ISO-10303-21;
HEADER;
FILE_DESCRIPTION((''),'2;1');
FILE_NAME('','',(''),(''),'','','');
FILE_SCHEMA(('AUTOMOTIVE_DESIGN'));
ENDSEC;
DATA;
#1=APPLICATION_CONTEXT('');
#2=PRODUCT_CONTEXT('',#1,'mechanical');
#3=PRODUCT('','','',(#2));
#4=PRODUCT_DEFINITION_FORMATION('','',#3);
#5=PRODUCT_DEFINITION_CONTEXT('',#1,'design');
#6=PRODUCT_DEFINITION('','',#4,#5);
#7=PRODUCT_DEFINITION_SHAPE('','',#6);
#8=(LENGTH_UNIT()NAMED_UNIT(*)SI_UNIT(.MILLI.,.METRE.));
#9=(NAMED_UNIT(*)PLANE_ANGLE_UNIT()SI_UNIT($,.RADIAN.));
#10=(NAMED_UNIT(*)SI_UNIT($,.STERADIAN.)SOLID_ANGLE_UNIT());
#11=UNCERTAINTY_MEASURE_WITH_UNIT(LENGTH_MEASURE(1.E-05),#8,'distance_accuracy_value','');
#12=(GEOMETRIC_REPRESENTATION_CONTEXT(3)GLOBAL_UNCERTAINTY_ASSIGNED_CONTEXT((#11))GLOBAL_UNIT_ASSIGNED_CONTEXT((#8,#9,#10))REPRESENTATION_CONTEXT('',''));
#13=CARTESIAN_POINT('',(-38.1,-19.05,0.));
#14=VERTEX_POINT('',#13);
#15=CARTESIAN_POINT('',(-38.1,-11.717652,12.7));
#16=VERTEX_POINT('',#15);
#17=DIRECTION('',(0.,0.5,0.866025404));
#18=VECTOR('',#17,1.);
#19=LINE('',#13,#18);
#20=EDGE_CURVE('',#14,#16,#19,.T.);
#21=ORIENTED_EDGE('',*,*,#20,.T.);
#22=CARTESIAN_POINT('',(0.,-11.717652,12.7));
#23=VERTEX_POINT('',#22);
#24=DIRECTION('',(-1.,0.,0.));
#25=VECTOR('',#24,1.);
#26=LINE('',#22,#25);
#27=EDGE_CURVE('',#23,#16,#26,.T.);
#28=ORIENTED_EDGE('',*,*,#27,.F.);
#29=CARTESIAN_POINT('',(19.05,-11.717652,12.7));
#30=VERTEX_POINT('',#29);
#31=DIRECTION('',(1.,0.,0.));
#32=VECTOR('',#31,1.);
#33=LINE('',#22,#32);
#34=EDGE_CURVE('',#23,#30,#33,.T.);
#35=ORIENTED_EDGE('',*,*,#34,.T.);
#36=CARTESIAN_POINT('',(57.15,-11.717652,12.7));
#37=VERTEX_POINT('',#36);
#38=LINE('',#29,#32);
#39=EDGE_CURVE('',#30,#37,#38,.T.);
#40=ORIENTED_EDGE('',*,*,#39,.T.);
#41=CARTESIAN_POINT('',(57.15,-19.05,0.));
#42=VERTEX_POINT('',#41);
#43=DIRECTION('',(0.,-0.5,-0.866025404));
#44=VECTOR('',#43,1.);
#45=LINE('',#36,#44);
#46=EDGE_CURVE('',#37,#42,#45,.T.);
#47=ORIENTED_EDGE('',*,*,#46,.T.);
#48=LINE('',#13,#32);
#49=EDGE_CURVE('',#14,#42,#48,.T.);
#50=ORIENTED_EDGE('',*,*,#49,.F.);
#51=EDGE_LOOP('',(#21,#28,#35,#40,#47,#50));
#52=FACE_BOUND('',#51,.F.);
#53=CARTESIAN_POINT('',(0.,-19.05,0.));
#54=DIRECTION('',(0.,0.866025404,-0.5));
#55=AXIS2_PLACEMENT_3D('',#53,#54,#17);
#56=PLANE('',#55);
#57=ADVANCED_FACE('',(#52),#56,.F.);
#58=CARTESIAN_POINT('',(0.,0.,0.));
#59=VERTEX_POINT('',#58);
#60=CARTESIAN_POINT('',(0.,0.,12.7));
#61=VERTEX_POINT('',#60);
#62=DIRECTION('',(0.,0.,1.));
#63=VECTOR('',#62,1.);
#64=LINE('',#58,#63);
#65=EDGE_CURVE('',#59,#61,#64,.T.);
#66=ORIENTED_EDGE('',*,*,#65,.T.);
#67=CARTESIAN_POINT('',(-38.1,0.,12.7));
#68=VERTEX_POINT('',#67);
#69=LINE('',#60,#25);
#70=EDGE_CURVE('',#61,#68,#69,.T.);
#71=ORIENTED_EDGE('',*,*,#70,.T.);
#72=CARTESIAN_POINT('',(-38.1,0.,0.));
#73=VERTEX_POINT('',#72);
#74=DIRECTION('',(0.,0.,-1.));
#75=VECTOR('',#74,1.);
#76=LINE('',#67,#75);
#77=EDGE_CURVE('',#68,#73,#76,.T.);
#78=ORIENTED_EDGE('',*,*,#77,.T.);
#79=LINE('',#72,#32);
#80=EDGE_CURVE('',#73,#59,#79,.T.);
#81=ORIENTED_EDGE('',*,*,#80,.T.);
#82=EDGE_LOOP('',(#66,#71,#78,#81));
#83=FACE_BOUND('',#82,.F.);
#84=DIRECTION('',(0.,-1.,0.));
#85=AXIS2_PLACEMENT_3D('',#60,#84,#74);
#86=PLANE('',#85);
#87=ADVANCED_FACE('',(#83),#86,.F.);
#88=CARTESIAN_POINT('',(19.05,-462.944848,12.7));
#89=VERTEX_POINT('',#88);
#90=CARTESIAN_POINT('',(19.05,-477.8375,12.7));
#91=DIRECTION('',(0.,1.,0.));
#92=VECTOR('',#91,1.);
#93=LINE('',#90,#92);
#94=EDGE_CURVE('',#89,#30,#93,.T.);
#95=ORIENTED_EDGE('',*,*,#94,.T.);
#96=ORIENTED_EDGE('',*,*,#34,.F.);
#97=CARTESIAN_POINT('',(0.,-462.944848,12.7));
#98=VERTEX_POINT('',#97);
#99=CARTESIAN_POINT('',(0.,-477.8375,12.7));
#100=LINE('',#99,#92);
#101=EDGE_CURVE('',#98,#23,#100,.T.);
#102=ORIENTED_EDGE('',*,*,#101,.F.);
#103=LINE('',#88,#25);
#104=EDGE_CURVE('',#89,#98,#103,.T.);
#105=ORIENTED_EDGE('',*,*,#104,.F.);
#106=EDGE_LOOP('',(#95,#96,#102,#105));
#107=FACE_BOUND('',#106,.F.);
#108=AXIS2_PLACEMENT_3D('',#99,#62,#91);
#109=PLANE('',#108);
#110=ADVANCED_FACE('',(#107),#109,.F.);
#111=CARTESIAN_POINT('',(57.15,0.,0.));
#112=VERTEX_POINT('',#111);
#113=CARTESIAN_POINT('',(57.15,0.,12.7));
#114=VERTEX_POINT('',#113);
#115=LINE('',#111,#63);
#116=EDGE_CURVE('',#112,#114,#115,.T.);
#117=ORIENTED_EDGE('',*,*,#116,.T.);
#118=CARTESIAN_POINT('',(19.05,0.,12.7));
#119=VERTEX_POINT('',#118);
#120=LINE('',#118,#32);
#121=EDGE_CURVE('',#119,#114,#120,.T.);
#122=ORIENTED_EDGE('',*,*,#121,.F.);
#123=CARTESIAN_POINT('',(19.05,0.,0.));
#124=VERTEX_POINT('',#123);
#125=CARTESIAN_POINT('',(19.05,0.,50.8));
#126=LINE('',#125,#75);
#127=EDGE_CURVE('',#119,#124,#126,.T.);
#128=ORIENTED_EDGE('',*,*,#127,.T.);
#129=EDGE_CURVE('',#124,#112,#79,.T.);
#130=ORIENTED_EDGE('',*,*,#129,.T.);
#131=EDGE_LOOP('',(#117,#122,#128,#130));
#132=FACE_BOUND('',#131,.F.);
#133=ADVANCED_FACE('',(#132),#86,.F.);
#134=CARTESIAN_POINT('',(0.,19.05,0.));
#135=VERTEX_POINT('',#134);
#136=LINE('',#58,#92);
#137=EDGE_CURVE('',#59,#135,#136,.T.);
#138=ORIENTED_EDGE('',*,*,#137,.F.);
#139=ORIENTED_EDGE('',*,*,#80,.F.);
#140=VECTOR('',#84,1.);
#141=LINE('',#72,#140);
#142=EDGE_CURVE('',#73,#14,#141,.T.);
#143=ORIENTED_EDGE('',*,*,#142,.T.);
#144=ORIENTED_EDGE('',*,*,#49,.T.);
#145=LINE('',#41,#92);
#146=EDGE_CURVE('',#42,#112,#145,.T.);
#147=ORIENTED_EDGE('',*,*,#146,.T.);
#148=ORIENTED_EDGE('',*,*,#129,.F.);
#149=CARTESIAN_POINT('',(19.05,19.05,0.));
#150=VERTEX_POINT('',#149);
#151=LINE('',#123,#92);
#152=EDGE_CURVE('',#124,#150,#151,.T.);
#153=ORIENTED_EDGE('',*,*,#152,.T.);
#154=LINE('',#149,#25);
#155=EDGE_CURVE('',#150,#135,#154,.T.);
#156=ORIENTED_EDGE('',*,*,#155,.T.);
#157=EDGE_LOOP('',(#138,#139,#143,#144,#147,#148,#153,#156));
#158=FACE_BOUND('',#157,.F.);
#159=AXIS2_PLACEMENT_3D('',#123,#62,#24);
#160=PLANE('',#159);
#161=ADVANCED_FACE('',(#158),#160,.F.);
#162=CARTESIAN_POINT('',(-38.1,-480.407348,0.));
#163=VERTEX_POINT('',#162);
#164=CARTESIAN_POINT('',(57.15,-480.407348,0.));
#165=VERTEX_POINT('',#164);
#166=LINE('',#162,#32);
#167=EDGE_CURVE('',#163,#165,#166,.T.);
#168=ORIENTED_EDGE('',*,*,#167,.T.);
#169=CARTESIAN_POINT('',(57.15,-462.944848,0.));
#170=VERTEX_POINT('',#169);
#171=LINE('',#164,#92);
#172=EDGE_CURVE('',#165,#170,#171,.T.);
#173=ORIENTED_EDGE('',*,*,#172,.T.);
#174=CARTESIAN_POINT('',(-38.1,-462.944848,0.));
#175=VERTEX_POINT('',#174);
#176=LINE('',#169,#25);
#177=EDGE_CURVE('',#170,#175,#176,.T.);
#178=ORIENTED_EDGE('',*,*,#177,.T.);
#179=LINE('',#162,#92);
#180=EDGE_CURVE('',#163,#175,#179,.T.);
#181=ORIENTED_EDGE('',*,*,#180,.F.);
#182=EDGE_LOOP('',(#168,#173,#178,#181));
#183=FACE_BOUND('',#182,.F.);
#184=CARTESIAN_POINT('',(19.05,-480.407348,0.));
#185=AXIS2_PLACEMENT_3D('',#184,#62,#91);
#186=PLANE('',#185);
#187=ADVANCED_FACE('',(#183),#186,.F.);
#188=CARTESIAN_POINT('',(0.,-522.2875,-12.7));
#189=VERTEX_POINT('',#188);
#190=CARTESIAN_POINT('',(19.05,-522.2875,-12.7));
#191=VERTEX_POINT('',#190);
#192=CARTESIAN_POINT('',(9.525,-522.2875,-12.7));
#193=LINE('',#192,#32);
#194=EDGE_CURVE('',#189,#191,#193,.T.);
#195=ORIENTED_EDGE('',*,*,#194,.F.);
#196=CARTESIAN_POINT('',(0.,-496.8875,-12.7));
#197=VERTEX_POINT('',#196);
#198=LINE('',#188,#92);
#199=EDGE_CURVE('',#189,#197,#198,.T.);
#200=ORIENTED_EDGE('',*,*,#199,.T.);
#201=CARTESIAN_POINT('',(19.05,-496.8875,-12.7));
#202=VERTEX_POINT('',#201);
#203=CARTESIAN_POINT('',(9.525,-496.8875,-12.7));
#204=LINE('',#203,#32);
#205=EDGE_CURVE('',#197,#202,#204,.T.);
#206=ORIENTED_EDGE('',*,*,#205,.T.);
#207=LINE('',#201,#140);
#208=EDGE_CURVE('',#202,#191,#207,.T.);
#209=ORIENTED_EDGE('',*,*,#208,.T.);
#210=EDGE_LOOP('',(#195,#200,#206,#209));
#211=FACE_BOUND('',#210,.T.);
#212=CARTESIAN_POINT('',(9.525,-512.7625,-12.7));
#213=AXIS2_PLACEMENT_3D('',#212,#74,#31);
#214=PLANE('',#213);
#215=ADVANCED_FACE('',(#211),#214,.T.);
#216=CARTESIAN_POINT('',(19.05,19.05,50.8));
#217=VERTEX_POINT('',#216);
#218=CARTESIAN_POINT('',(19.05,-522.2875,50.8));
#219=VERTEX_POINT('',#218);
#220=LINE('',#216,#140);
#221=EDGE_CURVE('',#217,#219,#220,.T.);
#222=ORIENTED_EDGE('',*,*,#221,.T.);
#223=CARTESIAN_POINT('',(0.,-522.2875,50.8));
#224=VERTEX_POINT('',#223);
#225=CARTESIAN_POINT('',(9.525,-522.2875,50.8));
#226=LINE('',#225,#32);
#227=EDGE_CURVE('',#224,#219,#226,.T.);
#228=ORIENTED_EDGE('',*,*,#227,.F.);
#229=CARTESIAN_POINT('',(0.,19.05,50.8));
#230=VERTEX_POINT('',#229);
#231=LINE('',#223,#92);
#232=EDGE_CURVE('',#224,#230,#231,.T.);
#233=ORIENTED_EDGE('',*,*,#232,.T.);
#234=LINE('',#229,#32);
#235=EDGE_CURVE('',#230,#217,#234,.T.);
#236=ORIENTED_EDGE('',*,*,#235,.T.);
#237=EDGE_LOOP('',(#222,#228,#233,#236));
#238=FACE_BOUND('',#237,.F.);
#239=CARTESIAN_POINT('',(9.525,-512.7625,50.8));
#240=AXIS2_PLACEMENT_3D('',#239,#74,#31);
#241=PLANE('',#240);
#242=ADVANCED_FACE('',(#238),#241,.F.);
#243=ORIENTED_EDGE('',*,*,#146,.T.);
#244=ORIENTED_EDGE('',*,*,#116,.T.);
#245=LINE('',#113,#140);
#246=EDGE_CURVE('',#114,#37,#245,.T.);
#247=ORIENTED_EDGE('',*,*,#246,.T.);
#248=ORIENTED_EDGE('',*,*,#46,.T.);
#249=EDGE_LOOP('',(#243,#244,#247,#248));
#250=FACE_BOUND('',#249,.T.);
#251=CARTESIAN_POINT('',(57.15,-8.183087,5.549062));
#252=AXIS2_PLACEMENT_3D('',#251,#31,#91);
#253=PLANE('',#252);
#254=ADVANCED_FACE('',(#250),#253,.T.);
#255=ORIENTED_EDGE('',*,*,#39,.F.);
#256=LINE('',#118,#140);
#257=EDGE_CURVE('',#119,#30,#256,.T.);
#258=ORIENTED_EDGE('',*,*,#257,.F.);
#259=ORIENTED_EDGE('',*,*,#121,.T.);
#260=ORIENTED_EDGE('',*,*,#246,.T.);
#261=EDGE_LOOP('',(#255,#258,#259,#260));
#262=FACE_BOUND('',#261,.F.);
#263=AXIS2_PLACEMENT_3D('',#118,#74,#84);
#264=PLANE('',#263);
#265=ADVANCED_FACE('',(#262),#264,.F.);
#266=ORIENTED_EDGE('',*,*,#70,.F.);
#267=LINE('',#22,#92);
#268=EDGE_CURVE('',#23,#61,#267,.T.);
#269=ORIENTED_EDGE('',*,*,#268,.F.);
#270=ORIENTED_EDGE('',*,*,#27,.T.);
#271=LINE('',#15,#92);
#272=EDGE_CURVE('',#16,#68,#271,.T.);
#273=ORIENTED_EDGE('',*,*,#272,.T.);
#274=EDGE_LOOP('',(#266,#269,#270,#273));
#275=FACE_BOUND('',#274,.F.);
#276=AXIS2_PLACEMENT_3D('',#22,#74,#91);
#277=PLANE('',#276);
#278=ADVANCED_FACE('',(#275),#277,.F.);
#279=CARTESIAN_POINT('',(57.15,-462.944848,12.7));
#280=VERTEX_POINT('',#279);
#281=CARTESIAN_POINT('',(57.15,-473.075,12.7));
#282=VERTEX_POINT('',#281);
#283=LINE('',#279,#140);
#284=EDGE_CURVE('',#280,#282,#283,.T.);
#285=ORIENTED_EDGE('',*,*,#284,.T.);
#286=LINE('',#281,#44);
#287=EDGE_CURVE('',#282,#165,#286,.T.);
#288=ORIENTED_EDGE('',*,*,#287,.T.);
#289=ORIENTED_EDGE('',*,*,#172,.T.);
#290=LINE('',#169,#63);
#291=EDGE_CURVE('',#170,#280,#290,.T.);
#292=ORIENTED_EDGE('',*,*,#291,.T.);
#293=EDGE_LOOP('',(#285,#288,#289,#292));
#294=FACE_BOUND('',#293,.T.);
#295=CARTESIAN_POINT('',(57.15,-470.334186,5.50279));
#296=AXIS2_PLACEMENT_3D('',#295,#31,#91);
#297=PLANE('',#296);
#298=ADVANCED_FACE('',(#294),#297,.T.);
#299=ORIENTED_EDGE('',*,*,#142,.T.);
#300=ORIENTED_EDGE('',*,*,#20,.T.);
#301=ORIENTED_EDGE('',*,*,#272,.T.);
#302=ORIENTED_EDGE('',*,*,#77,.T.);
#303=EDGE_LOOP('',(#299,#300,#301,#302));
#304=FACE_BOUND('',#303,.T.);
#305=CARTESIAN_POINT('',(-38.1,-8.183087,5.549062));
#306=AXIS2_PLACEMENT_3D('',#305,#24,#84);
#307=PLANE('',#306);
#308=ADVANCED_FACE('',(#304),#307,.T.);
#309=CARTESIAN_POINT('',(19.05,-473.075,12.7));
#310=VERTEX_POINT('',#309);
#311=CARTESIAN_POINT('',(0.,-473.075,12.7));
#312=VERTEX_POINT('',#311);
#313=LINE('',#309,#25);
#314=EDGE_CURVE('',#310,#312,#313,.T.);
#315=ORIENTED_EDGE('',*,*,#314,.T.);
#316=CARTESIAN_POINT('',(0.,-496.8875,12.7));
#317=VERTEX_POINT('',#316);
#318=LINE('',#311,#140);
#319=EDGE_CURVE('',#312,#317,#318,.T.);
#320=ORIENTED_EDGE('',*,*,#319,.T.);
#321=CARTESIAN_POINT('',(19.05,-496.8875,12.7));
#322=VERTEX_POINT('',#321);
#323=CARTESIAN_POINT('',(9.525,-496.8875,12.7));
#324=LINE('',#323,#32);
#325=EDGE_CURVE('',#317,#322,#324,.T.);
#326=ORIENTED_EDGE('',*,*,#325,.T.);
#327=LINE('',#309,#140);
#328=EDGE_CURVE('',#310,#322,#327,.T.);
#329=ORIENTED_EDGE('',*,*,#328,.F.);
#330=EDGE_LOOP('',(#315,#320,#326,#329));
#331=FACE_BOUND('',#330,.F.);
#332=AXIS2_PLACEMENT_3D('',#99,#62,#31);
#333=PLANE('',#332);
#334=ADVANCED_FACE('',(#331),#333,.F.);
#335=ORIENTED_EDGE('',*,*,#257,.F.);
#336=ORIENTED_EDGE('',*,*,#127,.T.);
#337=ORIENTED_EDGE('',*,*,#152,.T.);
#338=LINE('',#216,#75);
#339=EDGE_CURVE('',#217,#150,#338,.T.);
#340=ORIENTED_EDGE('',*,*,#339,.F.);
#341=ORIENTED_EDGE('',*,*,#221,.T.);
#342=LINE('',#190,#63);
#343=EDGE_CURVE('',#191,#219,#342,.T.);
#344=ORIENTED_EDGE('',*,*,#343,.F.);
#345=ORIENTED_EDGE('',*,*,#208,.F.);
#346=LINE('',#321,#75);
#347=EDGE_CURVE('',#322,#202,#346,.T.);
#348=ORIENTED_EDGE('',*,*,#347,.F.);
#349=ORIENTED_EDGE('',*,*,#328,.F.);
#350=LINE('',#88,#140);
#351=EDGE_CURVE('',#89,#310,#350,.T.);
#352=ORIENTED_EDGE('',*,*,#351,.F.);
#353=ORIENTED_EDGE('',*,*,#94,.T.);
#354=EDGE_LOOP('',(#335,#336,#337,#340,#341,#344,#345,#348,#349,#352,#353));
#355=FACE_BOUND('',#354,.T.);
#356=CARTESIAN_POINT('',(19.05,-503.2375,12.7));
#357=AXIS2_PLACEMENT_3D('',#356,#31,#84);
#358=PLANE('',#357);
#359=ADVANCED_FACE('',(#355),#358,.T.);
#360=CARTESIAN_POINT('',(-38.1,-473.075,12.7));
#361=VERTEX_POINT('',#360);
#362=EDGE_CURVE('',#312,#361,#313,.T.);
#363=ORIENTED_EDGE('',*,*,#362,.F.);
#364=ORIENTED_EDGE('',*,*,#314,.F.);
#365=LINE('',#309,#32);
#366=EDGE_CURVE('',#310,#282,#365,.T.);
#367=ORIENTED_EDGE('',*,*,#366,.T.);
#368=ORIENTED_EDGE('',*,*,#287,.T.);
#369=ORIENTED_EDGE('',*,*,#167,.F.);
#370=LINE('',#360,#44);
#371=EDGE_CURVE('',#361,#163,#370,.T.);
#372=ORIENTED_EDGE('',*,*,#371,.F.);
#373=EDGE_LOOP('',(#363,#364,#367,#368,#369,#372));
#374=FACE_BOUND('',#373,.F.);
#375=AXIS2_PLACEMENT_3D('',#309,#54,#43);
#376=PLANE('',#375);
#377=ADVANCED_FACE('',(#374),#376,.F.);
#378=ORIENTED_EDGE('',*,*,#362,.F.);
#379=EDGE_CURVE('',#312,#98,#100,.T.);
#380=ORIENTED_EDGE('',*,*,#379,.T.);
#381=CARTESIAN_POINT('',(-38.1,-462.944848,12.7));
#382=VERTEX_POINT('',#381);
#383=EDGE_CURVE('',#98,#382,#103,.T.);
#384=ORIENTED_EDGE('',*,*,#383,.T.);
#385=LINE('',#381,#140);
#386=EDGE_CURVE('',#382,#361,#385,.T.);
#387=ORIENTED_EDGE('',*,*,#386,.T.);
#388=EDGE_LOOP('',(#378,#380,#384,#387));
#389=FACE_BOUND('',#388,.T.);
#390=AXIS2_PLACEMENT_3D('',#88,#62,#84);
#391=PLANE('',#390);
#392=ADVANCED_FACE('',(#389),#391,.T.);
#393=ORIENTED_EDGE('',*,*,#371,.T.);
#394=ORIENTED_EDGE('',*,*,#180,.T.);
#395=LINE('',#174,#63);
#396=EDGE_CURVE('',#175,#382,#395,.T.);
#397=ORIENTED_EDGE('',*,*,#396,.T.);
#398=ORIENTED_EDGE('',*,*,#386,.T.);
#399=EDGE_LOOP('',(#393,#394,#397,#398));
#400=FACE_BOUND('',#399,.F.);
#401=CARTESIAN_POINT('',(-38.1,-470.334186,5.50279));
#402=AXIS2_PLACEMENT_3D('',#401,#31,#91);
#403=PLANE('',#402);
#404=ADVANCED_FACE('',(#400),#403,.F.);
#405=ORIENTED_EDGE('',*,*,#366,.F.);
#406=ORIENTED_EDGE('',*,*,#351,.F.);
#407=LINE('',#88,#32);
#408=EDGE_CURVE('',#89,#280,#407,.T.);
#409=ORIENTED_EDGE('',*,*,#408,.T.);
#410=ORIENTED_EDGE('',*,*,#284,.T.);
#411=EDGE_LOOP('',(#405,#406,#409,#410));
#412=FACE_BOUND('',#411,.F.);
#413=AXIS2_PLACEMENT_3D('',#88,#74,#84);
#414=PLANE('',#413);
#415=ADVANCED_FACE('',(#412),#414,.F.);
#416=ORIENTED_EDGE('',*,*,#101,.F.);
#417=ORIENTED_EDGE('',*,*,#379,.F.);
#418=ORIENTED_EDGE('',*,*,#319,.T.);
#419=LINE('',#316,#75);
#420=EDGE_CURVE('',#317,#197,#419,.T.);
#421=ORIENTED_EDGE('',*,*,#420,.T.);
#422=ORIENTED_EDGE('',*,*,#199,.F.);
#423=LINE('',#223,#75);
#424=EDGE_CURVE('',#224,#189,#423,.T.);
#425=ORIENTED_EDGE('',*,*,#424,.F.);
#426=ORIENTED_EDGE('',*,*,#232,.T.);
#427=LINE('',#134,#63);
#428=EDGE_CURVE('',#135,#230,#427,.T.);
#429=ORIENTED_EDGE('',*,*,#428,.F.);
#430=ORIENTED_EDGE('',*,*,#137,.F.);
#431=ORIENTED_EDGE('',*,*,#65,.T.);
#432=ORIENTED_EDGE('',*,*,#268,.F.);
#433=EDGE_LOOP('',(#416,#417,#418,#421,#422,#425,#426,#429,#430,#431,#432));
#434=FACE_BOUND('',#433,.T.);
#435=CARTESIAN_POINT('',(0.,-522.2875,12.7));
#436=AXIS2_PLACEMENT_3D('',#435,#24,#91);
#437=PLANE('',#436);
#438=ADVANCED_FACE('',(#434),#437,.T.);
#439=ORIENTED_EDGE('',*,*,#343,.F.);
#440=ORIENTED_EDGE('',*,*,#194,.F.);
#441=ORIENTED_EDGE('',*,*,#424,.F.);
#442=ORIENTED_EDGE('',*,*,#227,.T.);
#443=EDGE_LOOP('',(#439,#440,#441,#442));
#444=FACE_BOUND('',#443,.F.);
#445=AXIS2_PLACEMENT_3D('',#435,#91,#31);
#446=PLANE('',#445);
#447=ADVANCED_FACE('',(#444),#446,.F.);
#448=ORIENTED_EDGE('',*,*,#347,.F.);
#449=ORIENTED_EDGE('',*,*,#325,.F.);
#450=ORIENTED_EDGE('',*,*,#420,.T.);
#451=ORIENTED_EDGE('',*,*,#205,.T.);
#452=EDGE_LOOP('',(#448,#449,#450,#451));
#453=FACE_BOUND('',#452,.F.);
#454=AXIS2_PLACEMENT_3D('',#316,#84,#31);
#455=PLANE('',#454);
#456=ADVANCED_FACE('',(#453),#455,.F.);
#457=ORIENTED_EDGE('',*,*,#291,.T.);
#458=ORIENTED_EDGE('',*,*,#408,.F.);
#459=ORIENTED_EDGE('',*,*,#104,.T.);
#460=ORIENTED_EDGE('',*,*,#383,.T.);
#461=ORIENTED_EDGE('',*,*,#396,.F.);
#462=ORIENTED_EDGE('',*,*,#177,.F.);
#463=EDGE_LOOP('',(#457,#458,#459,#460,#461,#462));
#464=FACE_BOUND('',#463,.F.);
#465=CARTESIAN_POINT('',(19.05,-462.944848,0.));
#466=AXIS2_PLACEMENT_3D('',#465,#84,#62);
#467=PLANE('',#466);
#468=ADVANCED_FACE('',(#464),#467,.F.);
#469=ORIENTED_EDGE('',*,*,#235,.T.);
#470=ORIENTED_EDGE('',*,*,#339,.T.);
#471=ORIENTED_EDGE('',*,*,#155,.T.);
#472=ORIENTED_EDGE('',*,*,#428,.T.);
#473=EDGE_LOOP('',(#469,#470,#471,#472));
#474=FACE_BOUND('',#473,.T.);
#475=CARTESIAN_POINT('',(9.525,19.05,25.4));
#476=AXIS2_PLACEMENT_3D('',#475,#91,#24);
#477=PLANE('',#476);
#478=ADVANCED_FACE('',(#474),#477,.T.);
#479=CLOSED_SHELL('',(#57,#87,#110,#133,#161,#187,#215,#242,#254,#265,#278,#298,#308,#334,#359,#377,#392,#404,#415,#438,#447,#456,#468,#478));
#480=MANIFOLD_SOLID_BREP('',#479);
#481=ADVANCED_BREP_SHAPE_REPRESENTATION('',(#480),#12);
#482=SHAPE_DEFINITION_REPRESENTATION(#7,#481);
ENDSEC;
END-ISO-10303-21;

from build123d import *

# Parameters (mm, degrees)
F1_DEPTH  = 19.05
F3_DEPTH  = 38.1
F5_DEPTH  = 38.1
F7_DEPTH  = 19.05
F9_DEPTH  = 57.15
F10_DEPTH = 38.1
F11_W     = 19.05
F11_H     = 38.1
F12_DEPTH = 25.4
F13_W     = 19.05
F13_H     = 19.05
F13_H_2   = 6.35
F14_DEPTH = 25.4
F15_DEPTH = 38.1


# Not quite as in the source:
# - a feature names something its author has since deleted; it is built from what else it names


with BuildPart() as f1:
    # F0 (on Right) → F1 (new body)
    with BuildSketch(Plane.YZ):
        Polygon((-19.05, 0), (0, 0), (0, 50.8), (-477.8375, 50.8), (-477.8375, 12.7), (-11.7176515813, 12.7), align=None)
    extrude(amount=F1_DEPTH)

    # F2 (on face) → F3 (join)
    with BuildSketch(Plane.YZ.offset(19.05)):
        Polygon((0, 12.7), (-11.7176515813, 12.7), (-19.05, 0), (0, 0), align=None)
    extrude(amount=F3_DEPTH)

    # F4 (on face) → F5 (join)
    with BuildSketch(Plane(origin=(0, 0, 0), x_dir=(0, -1, 0), z_dir=(-1, 0, 0))):
        Polygon((19.05, 0), (11.7176515813, 12.7), (0, 12.7), (0, 0), align=None)
    extrude(amount=F5_DEPTH)

    # F6 (on face) → F7 (join)
    with BuildSketch(Plane(origin=(0, 0, 0), x_dir=(-1, 0, 0), z_dir=(0, 1, 0))):
        Polygon((0, 50.8), (-19.05, 50.8), (-19.05, 12.7), (-19.05, 0), (0, 0), (0, 12.7), align=None)
    extrude(amount=F7_DEPTH)

    # F8 (on face) → F9 (join)
    with BuildSketch(Plane.YZ.offset(19.05)):
        Polygon((-462.9448484187, 12.7), (-473.075, 12.7), (-480.4073484187, 0), (-462.9448484187, 0), align=None)
    extrude(amount=-F9_DEPTH)

    # F8 (on face) → F10 (join)
    with BuildSketch(Plane.YZ.offset(19.05)):
        Polygon((-462.9448484187, 12.7), (-473.075, 12.7), (-480.4073484187, 0), (-462.9448484187, 0), align=None)
    extrude(amount=F10_DEPTH)

    # F11 (on face) → F12 (join)
    with BuildSketch(Plane.XZ.offset(477.8375)):
        with Locations((9.525, 31.75)):
            Rectangle(F11_W, F11_H)
    extrude(amount=F12_DEPTH)

    # F13 (on face) → F14 (join)
    with BuildSketch(Plane(origin=(0, 0, 12.7), x_dir=(1, 0, 0), z_dir=(0, 0, -1))):
        with Locations((9.525, 512.7625)):
            Rectangle(F13_W, F13_H)
        with Locations((9.525, 500.0625)):
            Rectangle(F13_W, F13_H_2)
    extrude(amount=F14_DEPTH)

    # F15 (add, through all): a face of the model
    f15_faces = [f1.faces().sort_by_distance(p)[0] for p in [
        (9.525, -512.7625, 12.7),
    ]]
    extrude(f15_faces, amount=F15_DEPTH)


solid = f1.part
